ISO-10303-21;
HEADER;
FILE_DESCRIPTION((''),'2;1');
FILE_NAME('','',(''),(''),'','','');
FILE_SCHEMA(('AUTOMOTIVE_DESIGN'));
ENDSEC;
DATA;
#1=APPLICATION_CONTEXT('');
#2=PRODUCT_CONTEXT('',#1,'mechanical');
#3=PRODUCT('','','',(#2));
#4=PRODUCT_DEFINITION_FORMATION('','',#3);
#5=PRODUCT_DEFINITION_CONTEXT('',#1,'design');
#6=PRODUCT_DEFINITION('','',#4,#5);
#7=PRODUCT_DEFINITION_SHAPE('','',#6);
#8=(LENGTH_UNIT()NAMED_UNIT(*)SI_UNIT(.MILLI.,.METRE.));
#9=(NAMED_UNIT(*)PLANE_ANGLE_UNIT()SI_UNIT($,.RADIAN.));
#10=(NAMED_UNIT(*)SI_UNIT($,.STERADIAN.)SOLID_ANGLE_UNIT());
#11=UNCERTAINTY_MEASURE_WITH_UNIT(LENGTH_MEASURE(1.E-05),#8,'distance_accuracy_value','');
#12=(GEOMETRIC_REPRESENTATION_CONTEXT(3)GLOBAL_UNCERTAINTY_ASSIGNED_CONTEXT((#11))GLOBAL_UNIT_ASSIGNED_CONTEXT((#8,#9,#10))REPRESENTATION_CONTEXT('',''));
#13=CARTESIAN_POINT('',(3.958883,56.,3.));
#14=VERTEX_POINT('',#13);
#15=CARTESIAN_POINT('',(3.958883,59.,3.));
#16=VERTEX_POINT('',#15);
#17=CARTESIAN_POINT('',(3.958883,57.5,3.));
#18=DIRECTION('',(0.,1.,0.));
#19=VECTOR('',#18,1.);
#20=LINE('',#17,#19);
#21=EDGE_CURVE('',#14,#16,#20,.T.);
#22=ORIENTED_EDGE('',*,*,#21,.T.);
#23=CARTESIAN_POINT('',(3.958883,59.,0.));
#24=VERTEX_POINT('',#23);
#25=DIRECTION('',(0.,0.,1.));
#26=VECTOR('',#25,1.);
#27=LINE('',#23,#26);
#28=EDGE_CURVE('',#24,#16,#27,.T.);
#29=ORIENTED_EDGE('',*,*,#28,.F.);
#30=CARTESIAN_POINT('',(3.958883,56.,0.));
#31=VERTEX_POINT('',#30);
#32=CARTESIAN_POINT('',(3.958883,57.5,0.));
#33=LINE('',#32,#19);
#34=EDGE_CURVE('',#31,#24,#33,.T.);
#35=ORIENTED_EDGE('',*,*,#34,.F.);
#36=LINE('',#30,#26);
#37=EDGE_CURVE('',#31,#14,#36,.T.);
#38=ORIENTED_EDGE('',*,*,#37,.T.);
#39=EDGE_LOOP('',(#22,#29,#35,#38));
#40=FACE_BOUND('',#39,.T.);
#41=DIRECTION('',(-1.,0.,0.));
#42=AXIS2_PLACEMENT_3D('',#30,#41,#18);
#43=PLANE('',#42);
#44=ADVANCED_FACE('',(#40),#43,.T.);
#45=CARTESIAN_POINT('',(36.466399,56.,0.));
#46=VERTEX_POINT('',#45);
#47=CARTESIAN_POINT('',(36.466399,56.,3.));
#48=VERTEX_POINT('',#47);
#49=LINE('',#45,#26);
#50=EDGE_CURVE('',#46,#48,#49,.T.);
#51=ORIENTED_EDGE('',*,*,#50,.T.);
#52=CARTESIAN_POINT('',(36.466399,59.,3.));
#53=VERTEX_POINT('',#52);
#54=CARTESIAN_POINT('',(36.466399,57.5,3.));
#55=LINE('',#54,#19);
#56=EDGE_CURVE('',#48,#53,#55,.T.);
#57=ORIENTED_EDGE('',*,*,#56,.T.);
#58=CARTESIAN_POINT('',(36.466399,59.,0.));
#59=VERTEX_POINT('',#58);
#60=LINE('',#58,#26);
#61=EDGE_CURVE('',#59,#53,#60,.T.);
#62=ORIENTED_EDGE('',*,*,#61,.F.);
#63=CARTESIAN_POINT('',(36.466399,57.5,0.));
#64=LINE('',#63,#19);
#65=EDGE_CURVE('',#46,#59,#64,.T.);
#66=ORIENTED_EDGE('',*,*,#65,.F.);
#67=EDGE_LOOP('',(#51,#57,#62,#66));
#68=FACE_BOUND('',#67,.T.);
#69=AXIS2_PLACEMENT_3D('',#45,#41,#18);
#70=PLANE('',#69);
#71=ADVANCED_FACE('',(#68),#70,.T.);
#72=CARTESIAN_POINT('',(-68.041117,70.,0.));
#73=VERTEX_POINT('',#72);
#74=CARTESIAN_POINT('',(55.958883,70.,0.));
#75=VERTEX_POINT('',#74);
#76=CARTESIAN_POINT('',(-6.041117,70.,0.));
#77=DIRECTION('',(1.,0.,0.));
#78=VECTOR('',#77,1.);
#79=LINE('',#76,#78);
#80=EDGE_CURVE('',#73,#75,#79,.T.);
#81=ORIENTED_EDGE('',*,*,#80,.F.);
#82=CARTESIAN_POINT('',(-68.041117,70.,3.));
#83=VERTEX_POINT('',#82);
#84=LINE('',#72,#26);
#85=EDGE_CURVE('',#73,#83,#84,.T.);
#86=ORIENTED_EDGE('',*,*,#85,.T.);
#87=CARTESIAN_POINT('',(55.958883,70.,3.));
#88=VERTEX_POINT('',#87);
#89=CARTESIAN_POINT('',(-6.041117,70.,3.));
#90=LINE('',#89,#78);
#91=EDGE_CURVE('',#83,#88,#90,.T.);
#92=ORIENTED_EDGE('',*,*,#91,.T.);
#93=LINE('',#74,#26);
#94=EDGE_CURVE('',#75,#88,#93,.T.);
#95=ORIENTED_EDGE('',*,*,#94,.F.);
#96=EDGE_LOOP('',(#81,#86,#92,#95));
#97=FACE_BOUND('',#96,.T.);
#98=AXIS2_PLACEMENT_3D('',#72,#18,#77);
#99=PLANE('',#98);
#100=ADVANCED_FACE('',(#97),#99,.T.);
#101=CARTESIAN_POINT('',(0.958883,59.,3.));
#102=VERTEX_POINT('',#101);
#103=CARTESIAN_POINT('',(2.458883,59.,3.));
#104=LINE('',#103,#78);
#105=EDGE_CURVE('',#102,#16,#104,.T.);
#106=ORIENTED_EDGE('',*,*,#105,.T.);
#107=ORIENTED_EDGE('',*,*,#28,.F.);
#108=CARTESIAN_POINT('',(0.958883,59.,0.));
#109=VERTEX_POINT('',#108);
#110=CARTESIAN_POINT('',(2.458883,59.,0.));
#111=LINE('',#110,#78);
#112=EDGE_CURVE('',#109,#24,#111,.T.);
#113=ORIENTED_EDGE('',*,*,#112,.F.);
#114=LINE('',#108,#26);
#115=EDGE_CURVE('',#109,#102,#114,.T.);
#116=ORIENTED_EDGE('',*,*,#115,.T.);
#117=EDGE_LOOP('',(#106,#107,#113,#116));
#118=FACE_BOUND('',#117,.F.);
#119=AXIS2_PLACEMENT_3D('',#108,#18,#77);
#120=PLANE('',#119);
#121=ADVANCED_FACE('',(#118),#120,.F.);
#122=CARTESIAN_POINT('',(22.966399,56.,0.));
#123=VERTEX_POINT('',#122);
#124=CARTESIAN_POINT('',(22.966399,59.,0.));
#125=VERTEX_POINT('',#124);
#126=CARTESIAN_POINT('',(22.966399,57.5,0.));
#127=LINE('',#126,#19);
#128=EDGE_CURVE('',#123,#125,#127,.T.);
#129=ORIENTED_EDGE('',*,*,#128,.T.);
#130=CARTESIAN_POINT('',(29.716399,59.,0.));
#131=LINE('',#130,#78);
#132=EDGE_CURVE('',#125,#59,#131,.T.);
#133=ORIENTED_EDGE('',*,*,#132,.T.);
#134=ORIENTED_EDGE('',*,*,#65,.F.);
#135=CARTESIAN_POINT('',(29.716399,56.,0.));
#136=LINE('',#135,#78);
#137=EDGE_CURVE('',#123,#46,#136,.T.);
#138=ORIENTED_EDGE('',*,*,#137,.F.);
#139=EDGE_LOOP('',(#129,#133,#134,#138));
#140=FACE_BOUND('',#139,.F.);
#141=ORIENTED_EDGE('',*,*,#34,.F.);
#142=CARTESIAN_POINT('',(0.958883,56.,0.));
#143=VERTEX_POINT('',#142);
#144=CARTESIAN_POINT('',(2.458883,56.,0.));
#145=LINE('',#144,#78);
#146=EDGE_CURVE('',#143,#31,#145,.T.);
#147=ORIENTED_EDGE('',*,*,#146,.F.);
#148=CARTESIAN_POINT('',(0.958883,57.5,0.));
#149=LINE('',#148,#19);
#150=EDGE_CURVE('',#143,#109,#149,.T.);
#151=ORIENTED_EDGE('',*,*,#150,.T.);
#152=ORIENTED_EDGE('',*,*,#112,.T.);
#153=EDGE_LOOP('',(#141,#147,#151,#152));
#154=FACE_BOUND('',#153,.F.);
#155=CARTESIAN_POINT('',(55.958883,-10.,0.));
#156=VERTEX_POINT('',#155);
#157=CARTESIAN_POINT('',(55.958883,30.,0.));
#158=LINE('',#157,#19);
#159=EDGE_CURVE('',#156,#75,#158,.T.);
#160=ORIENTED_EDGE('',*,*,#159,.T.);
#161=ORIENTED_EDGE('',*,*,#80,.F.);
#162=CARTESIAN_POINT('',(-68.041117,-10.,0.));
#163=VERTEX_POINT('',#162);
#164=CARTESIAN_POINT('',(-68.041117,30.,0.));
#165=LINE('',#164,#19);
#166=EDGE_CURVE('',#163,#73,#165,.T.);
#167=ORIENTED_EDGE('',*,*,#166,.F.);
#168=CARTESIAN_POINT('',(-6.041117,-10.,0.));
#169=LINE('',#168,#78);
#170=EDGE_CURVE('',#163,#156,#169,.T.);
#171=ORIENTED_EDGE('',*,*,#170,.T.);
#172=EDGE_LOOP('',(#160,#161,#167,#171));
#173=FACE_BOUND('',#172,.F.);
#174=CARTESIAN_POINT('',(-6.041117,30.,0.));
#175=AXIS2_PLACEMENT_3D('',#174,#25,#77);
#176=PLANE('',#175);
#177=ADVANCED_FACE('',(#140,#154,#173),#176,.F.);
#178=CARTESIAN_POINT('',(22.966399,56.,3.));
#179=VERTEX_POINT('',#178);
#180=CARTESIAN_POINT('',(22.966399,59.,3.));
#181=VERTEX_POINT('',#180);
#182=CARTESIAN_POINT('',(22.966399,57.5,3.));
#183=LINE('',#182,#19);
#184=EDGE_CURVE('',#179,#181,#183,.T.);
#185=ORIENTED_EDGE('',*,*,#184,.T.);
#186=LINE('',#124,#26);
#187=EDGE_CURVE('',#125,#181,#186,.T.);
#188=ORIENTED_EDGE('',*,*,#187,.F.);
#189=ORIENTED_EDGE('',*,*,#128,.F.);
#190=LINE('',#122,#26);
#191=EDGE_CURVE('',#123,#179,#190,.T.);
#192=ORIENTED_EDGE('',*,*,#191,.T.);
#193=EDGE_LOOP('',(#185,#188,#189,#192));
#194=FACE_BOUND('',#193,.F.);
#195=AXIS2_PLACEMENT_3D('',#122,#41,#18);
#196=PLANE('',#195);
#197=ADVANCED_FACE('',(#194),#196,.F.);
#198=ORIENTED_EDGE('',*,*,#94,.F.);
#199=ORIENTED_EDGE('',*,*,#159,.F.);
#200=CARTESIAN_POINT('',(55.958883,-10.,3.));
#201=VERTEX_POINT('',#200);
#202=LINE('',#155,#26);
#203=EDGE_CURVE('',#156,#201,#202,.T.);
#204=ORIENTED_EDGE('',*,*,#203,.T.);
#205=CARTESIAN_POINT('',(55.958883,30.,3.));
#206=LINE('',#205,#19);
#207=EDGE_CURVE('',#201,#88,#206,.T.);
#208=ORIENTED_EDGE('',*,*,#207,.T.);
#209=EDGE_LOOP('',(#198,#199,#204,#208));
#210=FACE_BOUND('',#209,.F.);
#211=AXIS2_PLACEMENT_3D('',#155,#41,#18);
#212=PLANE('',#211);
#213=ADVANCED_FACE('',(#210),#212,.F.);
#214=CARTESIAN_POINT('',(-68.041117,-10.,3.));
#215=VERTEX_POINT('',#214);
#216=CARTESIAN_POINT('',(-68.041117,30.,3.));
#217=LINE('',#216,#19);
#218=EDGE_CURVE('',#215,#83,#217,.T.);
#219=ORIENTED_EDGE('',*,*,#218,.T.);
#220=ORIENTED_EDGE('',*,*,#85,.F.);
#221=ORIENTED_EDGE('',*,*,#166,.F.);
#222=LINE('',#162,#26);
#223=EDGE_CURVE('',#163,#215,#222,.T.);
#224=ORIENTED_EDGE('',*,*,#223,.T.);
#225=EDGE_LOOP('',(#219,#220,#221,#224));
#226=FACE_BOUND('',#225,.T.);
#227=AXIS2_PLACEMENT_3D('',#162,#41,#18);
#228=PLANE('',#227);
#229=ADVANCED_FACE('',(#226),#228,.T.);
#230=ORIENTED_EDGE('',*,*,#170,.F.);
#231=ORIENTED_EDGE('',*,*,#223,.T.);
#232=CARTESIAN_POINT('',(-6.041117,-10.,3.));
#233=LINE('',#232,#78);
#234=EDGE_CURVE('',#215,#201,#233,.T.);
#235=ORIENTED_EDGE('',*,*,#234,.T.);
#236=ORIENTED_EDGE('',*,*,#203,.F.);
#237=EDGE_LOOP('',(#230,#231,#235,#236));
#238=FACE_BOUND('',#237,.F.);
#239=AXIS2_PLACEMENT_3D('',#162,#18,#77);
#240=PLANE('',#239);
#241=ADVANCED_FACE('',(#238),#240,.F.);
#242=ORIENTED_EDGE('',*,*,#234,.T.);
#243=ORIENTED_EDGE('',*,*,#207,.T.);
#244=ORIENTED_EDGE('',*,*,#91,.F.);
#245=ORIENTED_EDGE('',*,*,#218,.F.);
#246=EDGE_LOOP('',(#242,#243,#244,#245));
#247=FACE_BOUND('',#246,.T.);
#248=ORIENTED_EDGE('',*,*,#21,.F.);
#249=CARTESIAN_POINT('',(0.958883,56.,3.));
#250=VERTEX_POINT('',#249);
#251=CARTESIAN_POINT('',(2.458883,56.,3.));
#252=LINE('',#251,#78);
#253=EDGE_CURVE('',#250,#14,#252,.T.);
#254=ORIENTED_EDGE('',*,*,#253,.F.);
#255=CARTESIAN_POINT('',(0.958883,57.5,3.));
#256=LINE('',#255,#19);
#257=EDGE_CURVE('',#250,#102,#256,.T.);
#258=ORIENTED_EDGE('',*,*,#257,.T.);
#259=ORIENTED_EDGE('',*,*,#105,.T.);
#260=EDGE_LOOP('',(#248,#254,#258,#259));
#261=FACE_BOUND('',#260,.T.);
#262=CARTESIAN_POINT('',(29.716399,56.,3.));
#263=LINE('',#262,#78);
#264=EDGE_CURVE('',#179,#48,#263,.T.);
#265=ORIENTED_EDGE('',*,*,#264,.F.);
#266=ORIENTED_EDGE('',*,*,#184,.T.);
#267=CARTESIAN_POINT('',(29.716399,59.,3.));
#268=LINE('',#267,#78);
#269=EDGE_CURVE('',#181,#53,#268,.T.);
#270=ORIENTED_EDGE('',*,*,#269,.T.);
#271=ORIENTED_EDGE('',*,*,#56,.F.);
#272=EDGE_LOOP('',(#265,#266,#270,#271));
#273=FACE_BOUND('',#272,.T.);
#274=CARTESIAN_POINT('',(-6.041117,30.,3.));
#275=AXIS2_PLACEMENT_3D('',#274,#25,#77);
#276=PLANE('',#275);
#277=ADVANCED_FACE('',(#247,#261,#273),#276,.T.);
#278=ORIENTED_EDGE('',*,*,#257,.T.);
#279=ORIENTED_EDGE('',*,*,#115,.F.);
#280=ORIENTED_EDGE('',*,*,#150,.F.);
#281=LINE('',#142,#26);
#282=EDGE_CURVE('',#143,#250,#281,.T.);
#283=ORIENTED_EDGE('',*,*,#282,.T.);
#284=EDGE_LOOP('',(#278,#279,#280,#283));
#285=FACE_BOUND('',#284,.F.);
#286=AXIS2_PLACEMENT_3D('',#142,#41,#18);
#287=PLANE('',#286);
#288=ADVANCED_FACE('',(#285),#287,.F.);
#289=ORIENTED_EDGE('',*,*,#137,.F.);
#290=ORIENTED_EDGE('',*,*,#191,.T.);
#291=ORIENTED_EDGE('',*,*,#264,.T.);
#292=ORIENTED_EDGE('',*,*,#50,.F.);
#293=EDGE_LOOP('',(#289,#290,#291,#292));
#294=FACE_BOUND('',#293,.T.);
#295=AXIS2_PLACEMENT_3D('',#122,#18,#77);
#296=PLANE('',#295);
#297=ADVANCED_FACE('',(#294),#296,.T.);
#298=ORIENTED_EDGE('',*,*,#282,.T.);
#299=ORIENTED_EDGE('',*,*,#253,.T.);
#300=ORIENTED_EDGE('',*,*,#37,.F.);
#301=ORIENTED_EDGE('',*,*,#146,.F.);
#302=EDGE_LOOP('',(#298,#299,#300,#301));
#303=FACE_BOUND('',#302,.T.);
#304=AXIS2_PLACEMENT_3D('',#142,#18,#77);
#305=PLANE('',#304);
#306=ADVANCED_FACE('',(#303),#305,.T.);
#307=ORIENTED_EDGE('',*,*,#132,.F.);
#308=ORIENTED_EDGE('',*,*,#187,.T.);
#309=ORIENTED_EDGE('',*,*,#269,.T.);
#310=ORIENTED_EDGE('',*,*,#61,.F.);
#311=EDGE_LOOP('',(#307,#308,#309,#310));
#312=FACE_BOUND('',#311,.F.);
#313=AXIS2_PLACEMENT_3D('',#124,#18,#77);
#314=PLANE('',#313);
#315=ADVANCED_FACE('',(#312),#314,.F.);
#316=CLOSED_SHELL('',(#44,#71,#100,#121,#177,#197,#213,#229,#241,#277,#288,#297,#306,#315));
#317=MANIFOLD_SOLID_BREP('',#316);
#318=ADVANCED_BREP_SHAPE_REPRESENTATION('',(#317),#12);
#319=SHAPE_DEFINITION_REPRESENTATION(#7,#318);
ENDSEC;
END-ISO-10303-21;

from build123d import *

# Parameters (mm, degrees)
F0_W     = 124
F0_H     = 80
F0_W_2   = 3
F0_H_2   = 3
F0_W_3   = 13.5
F1_DEPTH = 3


# Not quite as in the source:
# - a feature names something its author has since deleted; it is built from what else it names


with BuildPart() as f1:
    # F0 (on Top) → F1 (new body)
    with BuildSketch(Plane.XY):
        with Locations((-6.0411174464, 30)):
            Rectangle(F0_W, F0_H)
        with Locations((2.4588825536, 57.5)):
            Rectangle(F0_W_2, F0_H_2, mode=Mode.SUBTRACT)
        with Locations((29.7163994456, 57.5)):
            Rectangle(F0_W_3, F0_H_2, mode=Mode.SUBTRACT)
    extrude(amount=F1_DEPTH)


solid = f1.part
